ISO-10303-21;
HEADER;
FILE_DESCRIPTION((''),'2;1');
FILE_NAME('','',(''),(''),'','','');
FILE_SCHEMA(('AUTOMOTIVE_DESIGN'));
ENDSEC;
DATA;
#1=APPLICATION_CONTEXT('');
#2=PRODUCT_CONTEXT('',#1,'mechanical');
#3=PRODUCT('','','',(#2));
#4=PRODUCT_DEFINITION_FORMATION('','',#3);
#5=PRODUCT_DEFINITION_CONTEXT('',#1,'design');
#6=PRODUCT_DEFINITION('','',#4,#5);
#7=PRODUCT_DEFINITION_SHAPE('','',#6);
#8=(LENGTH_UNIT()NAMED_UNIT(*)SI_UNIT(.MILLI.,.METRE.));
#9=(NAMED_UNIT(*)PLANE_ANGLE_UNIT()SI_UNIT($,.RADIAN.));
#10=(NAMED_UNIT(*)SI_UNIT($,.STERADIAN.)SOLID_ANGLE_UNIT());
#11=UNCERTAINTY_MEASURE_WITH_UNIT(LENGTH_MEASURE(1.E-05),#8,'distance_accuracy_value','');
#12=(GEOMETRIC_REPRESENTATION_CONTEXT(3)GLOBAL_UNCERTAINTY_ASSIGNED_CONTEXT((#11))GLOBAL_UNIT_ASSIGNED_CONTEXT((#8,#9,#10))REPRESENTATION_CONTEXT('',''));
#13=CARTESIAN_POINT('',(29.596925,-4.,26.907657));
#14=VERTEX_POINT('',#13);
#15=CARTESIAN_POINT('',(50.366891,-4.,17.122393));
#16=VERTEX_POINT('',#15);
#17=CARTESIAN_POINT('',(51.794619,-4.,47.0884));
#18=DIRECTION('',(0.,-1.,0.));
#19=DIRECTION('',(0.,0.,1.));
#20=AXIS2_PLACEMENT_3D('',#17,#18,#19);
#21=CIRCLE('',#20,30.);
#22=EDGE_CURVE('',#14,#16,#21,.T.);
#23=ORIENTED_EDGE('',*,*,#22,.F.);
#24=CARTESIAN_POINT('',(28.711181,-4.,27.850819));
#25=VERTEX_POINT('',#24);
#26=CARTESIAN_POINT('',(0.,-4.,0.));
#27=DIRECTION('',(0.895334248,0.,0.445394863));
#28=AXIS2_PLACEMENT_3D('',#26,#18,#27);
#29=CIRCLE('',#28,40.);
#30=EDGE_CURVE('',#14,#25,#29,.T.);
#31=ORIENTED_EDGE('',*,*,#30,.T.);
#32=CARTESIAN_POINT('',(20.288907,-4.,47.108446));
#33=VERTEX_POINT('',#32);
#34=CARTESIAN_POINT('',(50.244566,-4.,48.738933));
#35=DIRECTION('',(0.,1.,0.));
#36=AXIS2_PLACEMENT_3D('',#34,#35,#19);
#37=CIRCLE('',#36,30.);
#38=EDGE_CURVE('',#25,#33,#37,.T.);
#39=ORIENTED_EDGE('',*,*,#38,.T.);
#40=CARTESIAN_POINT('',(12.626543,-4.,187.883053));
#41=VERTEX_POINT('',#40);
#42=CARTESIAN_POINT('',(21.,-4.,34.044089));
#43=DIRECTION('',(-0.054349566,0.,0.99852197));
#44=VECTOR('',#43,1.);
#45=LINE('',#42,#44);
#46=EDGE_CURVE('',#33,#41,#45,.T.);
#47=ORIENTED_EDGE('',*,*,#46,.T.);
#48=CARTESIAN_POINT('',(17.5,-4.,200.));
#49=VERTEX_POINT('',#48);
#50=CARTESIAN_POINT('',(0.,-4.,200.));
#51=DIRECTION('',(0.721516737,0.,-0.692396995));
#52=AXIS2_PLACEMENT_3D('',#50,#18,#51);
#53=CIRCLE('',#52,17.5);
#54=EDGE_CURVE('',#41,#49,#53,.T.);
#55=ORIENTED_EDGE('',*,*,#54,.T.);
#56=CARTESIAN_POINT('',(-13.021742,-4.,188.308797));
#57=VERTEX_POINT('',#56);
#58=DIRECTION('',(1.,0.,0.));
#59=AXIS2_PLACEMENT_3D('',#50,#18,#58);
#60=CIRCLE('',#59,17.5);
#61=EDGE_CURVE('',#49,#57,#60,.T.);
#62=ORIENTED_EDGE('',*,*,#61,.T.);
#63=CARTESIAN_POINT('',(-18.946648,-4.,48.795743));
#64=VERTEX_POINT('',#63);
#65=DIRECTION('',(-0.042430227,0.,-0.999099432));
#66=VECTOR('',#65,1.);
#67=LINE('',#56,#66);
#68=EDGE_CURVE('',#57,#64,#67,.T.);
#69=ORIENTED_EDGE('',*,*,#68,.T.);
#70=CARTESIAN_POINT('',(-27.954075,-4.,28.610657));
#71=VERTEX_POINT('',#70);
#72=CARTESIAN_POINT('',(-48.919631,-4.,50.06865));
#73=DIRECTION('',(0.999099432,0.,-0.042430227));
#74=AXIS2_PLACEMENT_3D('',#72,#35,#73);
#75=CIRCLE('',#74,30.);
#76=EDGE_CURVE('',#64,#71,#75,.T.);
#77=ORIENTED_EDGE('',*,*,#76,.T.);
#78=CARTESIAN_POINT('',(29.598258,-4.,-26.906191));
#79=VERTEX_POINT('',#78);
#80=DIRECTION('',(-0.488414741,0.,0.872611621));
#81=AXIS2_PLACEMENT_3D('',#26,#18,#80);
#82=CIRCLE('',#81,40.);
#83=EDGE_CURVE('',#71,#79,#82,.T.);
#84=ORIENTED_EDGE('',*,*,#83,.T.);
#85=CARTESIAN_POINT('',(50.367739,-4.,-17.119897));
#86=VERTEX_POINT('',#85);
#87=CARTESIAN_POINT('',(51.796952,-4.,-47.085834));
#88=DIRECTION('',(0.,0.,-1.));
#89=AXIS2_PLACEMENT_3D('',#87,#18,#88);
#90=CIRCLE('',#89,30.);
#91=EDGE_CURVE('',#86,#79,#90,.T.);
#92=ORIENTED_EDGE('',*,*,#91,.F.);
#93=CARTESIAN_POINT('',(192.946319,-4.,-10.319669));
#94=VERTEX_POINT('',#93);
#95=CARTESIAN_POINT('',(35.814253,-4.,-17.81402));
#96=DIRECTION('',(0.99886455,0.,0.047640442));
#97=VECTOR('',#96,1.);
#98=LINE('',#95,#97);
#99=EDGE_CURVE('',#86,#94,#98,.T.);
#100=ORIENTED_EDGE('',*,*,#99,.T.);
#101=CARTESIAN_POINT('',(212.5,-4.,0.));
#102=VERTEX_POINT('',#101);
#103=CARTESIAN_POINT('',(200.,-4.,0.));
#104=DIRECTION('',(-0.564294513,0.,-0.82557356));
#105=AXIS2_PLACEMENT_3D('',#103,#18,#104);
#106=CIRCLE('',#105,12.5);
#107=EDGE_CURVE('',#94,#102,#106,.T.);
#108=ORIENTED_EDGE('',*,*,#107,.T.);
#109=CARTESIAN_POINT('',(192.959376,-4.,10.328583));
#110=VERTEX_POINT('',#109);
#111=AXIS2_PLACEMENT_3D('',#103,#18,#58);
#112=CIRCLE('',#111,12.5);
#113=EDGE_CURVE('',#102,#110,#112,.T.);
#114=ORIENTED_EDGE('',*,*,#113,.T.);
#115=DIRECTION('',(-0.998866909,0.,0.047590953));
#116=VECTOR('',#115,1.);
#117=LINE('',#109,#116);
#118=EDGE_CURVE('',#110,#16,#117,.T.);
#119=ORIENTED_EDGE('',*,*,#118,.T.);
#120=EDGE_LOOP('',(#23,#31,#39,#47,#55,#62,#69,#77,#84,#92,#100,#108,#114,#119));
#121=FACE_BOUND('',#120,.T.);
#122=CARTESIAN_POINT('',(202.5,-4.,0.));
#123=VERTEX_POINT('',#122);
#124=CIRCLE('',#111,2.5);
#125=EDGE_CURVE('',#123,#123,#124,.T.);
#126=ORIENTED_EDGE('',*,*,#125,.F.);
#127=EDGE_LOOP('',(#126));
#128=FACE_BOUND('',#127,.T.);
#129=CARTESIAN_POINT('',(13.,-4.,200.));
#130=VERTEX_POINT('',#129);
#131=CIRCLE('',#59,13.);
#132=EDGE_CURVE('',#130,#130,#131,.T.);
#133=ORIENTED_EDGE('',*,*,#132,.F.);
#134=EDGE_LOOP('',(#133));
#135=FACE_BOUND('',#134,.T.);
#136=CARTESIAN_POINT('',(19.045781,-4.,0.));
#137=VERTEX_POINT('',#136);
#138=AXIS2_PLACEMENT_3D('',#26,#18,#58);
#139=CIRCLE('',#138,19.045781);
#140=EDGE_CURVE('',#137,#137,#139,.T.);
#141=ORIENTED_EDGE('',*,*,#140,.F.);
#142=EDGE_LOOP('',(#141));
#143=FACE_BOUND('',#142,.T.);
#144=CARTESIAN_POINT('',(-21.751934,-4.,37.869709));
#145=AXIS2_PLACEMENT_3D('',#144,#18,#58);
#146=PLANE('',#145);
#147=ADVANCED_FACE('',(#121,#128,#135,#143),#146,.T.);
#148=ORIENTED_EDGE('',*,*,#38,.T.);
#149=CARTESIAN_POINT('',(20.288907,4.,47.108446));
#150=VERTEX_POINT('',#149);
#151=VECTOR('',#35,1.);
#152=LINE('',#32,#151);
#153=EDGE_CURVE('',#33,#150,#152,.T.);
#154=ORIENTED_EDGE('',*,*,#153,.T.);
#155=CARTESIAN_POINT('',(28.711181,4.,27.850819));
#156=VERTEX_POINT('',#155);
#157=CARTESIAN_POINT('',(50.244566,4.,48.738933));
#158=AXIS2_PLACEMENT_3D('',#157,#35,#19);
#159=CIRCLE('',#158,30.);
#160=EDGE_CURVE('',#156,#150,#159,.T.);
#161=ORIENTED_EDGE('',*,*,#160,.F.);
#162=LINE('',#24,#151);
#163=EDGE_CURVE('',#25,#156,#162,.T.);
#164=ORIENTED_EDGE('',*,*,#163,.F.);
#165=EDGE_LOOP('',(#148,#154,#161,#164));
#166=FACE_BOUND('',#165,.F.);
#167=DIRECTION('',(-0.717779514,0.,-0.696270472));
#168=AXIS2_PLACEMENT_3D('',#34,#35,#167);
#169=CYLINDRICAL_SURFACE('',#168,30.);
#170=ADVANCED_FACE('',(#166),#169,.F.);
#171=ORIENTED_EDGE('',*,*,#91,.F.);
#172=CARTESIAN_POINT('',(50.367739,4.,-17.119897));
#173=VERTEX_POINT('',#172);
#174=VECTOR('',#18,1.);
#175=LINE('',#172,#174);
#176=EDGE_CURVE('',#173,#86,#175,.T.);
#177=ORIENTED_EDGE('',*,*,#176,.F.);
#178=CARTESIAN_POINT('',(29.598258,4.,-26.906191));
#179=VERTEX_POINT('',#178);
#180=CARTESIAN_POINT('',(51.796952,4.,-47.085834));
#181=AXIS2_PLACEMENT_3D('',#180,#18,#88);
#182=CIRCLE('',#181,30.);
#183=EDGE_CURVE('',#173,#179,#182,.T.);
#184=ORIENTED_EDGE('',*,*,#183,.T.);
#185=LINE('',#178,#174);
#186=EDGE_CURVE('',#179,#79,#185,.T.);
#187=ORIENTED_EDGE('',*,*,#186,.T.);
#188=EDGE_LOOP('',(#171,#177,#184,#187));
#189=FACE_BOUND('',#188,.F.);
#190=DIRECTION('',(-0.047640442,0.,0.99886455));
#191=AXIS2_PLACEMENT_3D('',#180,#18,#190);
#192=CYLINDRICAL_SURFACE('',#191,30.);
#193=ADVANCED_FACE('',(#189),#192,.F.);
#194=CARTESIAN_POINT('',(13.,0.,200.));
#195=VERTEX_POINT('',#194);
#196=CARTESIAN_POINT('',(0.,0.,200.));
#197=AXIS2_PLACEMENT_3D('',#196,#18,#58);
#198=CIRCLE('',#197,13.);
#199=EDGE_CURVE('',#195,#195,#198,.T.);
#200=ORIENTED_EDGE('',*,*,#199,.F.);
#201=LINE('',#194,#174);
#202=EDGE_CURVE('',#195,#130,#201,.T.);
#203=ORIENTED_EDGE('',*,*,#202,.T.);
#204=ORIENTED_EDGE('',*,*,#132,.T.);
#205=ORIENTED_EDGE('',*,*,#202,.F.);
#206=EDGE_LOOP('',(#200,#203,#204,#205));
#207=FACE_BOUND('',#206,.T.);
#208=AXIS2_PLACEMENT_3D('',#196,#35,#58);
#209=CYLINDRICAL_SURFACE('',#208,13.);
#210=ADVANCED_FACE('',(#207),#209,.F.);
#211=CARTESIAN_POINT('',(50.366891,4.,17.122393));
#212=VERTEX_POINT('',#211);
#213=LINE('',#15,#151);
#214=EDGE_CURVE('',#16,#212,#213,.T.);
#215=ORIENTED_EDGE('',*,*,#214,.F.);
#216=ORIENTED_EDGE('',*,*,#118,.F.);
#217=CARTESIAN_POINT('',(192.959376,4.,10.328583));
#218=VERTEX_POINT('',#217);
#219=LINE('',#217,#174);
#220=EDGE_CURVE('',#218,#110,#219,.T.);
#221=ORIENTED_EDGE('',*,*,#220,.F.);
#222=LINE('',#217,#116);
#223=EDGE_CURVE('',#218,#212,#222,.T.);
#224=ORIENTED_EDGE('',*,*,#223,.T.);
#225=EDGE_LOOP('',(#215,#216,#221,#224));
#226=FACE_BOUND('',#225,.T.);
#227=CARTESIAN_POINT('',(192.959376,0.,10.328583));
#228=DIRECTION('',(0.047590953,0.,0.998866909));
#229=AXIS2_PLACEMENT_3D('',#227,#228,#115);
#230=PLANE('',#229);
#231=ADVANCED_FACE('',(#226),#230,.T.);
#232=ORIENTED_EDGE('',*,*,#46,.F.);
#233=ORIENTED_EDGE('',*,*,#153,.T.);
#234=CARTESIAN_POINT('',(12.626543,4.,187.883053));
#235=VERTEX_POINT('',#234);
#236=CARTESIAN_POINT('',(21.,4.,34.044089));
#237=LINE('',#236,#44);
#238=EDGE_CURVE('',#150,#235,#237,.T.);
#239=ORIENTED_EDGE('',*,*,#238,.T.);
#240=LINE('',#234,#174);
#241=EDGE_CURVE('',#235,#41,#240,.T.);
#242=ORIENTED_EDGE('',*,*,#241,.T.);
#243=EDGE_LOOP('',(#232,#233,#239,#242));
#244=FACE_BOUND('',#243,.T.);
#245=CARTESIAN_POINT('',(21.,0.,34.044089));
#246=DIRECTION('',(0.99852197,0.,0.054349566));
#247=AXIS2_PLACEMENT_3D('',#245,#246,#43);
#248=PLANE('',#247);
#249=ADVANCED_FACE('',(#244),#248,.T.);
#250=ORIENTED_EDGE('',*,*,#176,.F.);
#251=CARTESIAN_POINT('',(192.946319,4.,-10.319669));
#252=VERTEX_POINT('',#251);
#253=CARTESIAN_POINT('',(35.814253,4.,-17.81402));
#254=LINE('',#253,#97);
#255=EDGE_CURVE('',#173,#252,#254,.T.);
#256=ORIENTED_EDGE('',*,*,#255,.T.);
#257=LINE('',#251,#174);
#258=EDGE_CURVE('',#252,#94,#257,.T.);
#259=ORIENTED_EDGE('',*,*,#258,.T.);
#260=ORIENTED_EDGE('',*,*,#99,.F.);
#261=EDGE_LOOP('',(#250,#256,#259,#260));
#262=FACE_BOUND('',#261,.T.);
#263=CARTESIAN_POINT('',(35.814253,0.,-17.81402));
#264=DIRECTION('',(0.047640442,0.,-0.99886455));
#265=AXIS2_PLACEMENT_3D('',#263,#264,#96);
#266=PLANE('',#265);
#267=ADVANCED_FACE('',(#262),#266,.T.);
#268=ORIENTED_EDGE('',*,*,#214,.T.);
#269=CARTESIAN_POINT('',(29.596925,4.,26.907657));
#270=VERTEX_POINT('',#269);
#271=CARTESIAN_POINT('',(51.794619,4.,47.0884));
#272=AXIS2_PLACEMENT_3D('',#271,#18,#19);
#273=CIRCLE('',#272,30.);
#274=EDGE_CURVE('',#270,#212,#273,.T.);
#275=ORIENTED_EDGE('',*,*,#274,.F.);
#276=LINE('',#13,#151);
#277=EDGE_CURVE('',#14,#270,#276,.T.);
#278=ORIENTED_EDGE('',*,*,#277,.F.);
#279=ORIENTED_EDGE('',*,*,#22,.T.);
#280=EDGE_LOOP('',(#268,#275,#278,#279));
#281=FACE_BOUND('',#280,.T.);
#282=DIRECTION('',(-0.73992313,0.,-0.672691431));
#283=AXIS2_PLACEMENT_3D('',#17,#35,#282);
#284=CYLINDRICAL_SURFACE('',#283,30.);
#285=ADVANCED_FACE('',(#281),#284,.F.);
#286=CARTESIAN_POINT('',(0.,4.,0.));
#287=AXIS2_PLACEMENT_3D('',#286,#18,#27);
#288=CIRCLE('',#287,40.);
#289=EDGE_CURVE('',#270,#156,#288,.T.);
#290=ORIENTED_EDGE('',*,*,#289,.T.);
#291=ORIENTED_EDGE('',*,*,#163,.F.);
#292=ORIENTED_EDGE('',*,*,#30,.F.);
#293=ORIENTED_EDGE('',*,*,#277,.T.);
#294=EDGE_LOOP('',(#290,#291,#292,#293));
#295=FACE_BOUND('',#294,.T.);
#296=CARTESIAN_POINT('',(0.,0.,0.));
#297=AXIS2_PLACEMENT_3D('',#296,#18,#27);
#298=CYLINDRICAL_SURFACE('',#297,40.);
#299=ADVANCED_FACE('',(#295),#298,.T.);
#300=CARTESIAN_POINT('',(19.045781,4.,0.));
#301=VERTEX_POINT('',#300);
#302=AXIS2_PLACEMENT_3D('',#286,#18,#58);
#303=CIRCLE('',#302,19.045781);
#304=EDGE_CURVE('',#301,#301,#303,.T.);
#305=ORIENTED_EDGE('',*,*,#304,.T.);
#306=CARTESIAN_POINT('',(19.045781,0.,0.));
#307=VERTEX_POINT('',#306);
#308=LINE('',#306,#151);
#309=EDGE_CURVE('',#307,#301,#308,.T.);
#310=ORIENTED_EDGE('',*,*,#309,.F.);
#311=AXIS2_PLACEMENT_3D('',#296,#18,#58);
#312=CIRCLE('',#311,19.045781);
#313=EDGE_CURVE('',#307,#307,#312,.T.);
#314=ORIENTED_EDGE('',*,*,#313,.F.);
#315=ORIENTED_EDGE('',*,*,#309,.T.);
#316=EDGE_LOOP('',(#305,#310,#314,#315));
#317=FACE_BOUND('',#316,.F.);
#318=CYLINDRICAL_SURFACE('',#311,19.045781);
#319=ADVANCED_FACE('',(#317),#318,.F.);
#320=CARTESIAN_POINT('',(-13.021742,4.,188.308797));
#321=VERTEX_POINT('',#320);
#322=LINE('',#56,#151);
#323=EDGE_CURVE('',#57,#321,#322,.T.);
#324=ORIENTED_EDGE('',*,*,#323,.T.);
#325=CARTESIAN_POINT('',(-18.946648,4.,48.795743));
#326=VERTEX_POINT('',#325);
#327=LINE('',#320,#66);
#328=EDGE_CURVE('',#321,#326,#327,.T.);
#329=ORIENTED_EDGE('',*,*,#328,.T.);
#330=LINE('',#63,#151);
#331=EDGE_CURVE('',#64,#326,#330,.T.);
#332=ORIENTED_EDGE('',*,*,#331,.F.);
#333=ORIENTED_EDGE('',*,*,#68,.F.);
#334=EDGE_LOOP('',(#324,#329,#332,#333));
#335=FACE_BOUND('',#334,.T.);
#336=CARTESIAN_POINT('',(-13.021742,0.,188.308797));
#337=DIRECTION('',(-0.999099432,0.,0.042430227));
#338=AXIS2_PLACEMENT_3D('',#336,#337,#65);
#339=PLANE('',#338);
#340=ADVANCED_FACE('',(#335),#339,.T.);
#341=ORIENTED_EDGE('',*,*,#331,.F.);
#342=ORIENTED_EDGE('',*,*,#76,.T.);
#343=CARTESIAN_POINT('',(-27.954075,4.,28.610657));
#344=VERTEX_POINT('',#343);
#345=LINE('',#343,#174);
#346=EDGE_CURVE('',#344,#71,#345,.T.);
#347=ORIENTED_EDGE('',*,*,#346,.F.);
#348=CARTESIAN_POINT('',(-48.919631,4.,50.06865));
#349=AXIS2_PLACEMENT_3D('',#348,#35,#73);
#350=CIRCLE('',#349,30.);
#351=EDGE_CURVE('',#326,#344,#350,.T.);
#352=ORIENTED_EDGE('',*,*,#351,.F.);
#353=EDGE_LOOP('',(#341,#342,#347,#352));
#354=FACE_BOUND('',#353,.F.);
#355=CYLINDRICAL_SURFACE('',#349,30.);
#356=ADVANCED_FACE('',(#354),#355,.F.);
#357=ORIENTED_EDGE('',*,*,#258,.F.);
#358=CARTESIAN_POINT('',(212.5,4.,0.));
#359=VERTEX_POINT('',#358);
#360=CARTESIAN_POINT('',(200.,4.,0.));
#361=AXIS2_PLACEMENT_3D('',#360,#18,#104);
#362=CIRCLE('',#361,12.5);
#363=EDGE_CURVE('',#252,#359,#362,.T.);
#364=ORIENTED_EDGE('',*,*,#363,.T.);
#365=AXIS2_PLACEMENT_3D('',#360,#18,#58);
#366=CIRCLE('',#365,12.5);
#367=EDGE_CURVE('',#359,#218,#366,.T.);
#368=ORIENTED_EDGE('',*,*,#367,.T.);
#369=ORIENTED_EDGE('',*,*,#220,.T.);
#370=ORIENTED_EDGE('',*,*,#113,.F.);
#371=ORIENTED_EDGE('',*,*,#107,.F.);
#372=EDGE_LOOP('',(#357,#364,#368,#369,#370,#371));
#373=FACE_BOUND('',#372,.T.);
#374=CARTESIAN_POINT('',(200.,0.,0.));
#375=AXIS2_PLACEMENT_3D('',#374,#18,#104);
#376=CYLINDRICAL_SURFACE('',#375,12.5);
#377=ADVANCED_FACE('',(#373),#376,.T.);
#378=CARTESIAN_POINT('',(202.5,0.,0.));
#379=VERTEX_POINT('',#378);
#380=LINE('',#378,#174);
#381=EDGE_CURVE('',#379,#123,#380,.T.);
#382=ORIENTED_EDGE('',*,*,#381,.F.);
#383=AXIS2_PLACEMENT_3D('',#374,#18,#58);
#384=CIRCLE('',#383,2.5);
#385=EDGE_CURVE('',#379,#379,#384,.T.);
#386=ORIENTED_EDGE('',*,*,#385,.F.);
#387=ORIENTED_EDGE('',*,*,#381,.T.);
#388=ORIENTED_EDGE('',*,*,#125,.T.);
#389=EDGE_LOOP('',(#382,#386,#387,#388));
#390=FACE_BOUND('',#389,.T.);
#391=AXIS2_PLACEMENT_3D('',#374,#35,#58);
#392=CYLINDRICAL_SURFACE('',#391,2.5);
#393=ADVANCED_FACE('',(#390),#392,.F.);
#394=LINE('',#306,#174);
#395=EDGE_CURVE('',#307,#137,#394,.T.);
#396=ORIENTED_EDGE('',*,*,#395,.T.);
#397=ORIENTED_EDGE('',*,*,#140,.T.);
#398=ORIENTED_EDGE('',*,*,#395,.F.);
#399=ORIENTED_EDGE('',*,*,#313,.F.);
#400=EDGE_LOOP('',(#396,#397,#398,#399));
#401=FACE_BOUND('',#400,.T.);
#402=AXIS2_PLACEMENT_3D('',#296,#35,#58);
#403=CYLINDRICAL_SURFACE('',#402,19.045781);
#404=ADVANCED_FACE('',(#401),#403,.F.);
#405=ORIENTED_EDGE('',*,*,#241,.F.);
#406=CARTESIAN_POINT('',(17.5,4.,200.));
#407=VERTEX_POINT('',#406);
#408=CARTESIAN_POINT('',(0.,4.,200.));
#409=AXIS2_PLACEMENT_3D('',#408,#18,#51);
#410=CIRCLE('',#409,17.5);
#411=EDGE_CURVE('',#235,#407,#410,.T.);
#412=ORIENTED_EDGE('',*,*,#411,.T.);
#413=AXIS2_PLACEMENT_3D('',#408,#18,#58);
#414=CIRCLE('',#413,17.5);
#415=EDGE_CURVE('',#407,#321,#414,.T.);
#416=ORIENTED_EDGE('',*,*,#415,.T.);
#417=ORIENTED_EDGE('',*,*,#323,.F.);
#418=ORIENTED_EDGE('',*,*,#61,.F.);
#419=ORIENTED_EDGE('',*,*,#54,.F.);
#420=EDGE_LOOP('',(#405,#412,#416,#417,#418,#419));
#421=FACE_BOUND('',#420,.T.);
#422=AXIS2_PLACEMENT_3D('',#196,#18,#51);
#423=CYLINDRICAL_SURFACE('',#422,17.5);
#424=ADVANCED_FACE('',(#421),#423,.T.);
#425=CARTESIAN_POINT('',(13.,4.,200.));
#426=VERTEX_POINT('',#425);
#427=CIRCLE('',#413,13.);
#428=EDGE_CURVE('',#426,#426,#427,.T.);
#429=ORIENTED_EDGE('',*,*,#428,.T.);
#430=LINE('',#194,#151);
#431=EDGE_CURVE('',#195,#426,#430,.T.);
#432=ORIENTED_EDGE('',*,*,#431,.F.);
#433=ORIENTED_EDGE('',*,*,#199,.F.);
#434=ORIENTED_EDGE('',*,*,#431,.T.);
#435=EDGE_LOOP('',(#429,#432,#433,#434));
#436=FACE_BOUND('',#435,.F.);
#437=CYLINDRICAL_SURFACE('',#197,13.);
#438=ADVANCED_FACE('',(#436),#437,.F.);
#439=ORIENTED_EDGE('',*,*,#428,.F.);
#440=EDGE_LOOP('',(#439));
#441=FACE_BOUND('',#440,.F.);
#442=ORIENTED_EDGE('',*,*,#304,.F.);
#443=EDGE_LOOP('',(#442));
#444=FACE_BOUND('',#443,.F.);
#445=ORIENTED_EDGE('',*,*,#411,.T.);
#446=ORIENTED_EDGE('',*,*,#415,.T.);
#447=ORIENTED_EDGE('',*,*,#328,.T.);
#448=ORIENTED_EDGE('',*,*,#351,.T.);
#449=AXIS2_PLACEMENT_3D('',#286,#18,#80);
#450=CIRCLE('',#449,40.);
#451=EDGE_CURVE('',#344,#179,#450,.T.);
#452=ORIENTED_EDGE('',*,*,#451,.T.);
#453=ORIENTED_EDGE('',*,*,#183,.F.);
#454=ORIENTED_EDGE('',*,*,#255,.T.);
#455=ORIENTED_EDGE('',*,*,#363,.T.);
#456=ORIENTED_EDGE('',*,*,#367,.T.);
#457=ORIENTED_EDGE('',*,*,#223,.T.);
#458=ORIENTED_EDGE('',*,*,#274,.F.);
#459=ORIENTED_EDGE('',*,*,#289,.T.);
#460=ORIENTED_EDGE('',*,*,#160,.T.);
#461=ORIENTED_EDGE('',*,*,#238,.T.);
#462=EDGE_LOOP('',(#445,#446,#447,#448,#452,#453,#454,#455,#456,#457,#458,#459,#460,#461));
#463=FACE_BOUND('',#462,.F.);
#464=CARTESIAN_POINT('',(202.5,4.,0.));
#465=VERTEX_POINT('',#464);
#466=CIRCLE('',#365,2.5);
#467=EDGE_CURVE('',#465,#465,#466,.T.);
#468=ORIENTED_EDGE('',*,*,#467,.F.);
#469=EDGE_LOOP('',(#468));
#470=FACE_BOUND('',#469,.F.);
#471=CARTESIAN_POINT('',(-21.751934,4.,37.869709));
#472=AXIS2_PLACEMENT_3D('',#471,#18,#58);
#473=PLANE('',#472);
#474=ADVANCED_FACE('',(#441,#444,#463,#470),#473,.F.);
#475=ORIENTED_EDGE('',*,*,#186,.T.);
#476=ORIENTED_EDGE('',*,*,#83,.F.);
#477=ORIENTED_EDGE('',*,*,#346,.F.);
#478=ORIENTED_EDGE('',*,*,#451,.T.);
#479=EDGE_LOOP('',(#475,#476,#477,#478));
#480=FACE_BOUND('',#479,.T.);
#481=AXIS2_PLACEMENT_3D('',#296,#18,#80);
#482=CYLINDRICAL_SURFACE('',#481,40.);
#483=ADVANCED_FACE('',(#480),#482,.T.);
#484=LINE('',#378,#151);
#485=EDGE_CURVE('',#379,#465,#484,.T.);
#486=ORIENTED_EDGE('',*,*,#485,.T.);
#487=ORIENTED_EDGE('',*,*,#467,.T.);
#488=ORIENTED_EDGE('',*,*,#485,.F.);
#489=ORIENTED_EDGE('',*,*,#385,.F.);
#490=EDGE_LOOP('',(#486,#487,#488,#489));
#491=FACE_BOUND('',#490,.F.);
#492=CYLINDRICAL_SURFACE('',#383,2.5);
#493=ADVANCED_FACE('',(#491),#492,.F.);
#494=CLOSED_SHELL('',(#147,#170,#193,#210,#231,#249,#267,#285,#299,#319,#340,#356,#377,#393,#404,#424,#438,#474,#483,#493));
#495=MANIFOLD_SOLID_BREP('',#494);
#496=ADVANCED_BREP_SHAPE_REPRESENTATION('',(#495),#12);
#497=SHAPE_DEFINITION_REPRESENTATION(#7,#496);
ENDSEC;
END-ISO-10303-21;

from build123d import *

# Parameters (mm, degrees)
F0_R        = 19.0457812865
F0_R_2      = 13
F0_R_3      = 2.5
F1_DEPTH    = 4
F2_R        = 30
F3_R        = 30
F4_T1_DEPTH = 8
F5_R        = 30


# Not quite as in the source:
# - a fillet or chamfer that OpenCascade refuses, or shapes differently, is made with other operations: its cross-section is extruded or revolved along the edge and cut away or added


with BuildPart() as f1:
    # F0 (on Front) → F1 (new body, symmetric)
    with BuildSketch(Plane.XZ):
        with BuildLine():
            ThreePointArc((-19.5365896508, 34.9044648264), (0.8487956626, 39.99099331), (21, 34.0440890611))
            Line((21, 34.0440890611), (12.6265428967, 187.8830525924))
            ThreePointArc((12.6265428967, 187.8830525924), (-0.2904480488, 182.5024104537), (-13.0217419566, 188.3087966224))
            Line((-13.0217419566, 188.3087966224), (-19.5365896508, 34.9044648264))
        make_face()
        with BuildLine():
            ThreePointArc((35.8133699363, 17.8157945038), (38.939278354, 9.1505519655), (40, 0))
            ThreePointArc((40, 0), (38.9395050251, -9.1495873352), (35.8142525798, -17.8140201007))
            Line((35.8142525798, -17.8140201007), (192.9463185859, -10.3196694961))
            ThreePointArc((192.9463185859, -10.3196694961), (187.5000024995, 0.0079048318), (192.9593762653, 10.3285825468))
            Line((192.9593762653, 10.3285825468), (35.8133699363, 17.8157945038))
        make_face()
        with BuildLine():
            ThreePointArc((35.8142525798, -17.8140201007), (38.9395050251, -9.1495873352), (40, 0))
            ThreePointArc((40, 0), (38.939278354, 9.1505519655), (35.8133699363, 17.8157945038))
            ThreePointArc((35.8133699363, 17.8157945038), (29.542835628, 26.9670328931), (21, 34.0440890611))
            ThreePointArc((21, 34.0440890611), (0.8487956626, 39.99099331), (-19.5365896508, 34.9044648264))
            ThreePointArc((-19.5365896508, 34.9044648264), (-27.5871390481, -28.9646294494), (35.8142525798, -17.8140201007))
        make_face()
        Circle(F0_R, mode=Mode.SUBTRACT)
        with BuildLine():
            ThreePointArc((-13.0217419566, 188.3087966224), (-0.2904480488, 182.5024104537), (12.6265428967, 187.8830525924))
            ThreePointArc((12.6265428967, 187.8830525924), (16.2359862757, 193.4698583741), (17.5, 200))
            ThreePointArc((17.5, 200), (-6.2597729895, 216.3421308929), (-13.0217419566, 188.3087966224))
        make_face()
        with Locations((0, 200)):
            Circle(F0_R_2, mode=Mode.SUBTRACT)
        with BuildLine():
            ThreePointArc((212.5, 0), (205.841327046, 11.0511944306), (192.9593762653, 10.3285825468))
            ThreePointArc((192.9593762653, 10.3285825468), (187.5000024995, 0.0079048318), (192.9463185859, -10.3196694961))
            ThreePointArc((192.9463185859, -10.3196694961), (205.8343372513, -11.0548861974), (212.5, 0))
        make_face()
        with Locations((200, 0)):
            Circle(F0_R_3, mode=Mode.SUBTRACT)
    extrude(amount=F1_DEPTH, both=True)

    # F2
    f2_edges = [f1.edges().sort_by_distance(p)[0] for p in [
        (35.81337, 0, 17.815795),
    ]]
    fillet(f2_edges, radius=F2_R)

    # F3
    f3_edges = [f1.edges().sort_by_distance(p)[0] for p in [
        (21, 0, 34.044089),
    ]]
    fillet(f3_edges, radius=F3_R)

    # F4: fillet of radius 30 on 1 edges, made by hand

    # F4_s2 → F4_t1 (join)
    with BuildSketch(Plane.XZ.offset(-4)):
        with BuildLine():
            ThreePointArc((-18.9466482885, 48.7957428331), (-21.5235892515, 37.8433937284), (-27.954075006, 28.6106569403))
            ThreePointArc((-27.954075006, 28.6106569403), (-23.9529499606, 32.0352335435), (-19.5365896508, 34.9044648264))
            Line((-19.5365896508, 34.9044648264), (-18.9466482885, 48.7957428331))
        make_face()
    extrude(amount=F4_T1_DEPTH)

    # F5
    f5_edges = [f1.edges().sort_by_distance(p)[0] for p in [
        (35.814253, 0, -17.81402),
    ]]
    fillet(f5_edges, radius=F5_R)


solid = f1.part
